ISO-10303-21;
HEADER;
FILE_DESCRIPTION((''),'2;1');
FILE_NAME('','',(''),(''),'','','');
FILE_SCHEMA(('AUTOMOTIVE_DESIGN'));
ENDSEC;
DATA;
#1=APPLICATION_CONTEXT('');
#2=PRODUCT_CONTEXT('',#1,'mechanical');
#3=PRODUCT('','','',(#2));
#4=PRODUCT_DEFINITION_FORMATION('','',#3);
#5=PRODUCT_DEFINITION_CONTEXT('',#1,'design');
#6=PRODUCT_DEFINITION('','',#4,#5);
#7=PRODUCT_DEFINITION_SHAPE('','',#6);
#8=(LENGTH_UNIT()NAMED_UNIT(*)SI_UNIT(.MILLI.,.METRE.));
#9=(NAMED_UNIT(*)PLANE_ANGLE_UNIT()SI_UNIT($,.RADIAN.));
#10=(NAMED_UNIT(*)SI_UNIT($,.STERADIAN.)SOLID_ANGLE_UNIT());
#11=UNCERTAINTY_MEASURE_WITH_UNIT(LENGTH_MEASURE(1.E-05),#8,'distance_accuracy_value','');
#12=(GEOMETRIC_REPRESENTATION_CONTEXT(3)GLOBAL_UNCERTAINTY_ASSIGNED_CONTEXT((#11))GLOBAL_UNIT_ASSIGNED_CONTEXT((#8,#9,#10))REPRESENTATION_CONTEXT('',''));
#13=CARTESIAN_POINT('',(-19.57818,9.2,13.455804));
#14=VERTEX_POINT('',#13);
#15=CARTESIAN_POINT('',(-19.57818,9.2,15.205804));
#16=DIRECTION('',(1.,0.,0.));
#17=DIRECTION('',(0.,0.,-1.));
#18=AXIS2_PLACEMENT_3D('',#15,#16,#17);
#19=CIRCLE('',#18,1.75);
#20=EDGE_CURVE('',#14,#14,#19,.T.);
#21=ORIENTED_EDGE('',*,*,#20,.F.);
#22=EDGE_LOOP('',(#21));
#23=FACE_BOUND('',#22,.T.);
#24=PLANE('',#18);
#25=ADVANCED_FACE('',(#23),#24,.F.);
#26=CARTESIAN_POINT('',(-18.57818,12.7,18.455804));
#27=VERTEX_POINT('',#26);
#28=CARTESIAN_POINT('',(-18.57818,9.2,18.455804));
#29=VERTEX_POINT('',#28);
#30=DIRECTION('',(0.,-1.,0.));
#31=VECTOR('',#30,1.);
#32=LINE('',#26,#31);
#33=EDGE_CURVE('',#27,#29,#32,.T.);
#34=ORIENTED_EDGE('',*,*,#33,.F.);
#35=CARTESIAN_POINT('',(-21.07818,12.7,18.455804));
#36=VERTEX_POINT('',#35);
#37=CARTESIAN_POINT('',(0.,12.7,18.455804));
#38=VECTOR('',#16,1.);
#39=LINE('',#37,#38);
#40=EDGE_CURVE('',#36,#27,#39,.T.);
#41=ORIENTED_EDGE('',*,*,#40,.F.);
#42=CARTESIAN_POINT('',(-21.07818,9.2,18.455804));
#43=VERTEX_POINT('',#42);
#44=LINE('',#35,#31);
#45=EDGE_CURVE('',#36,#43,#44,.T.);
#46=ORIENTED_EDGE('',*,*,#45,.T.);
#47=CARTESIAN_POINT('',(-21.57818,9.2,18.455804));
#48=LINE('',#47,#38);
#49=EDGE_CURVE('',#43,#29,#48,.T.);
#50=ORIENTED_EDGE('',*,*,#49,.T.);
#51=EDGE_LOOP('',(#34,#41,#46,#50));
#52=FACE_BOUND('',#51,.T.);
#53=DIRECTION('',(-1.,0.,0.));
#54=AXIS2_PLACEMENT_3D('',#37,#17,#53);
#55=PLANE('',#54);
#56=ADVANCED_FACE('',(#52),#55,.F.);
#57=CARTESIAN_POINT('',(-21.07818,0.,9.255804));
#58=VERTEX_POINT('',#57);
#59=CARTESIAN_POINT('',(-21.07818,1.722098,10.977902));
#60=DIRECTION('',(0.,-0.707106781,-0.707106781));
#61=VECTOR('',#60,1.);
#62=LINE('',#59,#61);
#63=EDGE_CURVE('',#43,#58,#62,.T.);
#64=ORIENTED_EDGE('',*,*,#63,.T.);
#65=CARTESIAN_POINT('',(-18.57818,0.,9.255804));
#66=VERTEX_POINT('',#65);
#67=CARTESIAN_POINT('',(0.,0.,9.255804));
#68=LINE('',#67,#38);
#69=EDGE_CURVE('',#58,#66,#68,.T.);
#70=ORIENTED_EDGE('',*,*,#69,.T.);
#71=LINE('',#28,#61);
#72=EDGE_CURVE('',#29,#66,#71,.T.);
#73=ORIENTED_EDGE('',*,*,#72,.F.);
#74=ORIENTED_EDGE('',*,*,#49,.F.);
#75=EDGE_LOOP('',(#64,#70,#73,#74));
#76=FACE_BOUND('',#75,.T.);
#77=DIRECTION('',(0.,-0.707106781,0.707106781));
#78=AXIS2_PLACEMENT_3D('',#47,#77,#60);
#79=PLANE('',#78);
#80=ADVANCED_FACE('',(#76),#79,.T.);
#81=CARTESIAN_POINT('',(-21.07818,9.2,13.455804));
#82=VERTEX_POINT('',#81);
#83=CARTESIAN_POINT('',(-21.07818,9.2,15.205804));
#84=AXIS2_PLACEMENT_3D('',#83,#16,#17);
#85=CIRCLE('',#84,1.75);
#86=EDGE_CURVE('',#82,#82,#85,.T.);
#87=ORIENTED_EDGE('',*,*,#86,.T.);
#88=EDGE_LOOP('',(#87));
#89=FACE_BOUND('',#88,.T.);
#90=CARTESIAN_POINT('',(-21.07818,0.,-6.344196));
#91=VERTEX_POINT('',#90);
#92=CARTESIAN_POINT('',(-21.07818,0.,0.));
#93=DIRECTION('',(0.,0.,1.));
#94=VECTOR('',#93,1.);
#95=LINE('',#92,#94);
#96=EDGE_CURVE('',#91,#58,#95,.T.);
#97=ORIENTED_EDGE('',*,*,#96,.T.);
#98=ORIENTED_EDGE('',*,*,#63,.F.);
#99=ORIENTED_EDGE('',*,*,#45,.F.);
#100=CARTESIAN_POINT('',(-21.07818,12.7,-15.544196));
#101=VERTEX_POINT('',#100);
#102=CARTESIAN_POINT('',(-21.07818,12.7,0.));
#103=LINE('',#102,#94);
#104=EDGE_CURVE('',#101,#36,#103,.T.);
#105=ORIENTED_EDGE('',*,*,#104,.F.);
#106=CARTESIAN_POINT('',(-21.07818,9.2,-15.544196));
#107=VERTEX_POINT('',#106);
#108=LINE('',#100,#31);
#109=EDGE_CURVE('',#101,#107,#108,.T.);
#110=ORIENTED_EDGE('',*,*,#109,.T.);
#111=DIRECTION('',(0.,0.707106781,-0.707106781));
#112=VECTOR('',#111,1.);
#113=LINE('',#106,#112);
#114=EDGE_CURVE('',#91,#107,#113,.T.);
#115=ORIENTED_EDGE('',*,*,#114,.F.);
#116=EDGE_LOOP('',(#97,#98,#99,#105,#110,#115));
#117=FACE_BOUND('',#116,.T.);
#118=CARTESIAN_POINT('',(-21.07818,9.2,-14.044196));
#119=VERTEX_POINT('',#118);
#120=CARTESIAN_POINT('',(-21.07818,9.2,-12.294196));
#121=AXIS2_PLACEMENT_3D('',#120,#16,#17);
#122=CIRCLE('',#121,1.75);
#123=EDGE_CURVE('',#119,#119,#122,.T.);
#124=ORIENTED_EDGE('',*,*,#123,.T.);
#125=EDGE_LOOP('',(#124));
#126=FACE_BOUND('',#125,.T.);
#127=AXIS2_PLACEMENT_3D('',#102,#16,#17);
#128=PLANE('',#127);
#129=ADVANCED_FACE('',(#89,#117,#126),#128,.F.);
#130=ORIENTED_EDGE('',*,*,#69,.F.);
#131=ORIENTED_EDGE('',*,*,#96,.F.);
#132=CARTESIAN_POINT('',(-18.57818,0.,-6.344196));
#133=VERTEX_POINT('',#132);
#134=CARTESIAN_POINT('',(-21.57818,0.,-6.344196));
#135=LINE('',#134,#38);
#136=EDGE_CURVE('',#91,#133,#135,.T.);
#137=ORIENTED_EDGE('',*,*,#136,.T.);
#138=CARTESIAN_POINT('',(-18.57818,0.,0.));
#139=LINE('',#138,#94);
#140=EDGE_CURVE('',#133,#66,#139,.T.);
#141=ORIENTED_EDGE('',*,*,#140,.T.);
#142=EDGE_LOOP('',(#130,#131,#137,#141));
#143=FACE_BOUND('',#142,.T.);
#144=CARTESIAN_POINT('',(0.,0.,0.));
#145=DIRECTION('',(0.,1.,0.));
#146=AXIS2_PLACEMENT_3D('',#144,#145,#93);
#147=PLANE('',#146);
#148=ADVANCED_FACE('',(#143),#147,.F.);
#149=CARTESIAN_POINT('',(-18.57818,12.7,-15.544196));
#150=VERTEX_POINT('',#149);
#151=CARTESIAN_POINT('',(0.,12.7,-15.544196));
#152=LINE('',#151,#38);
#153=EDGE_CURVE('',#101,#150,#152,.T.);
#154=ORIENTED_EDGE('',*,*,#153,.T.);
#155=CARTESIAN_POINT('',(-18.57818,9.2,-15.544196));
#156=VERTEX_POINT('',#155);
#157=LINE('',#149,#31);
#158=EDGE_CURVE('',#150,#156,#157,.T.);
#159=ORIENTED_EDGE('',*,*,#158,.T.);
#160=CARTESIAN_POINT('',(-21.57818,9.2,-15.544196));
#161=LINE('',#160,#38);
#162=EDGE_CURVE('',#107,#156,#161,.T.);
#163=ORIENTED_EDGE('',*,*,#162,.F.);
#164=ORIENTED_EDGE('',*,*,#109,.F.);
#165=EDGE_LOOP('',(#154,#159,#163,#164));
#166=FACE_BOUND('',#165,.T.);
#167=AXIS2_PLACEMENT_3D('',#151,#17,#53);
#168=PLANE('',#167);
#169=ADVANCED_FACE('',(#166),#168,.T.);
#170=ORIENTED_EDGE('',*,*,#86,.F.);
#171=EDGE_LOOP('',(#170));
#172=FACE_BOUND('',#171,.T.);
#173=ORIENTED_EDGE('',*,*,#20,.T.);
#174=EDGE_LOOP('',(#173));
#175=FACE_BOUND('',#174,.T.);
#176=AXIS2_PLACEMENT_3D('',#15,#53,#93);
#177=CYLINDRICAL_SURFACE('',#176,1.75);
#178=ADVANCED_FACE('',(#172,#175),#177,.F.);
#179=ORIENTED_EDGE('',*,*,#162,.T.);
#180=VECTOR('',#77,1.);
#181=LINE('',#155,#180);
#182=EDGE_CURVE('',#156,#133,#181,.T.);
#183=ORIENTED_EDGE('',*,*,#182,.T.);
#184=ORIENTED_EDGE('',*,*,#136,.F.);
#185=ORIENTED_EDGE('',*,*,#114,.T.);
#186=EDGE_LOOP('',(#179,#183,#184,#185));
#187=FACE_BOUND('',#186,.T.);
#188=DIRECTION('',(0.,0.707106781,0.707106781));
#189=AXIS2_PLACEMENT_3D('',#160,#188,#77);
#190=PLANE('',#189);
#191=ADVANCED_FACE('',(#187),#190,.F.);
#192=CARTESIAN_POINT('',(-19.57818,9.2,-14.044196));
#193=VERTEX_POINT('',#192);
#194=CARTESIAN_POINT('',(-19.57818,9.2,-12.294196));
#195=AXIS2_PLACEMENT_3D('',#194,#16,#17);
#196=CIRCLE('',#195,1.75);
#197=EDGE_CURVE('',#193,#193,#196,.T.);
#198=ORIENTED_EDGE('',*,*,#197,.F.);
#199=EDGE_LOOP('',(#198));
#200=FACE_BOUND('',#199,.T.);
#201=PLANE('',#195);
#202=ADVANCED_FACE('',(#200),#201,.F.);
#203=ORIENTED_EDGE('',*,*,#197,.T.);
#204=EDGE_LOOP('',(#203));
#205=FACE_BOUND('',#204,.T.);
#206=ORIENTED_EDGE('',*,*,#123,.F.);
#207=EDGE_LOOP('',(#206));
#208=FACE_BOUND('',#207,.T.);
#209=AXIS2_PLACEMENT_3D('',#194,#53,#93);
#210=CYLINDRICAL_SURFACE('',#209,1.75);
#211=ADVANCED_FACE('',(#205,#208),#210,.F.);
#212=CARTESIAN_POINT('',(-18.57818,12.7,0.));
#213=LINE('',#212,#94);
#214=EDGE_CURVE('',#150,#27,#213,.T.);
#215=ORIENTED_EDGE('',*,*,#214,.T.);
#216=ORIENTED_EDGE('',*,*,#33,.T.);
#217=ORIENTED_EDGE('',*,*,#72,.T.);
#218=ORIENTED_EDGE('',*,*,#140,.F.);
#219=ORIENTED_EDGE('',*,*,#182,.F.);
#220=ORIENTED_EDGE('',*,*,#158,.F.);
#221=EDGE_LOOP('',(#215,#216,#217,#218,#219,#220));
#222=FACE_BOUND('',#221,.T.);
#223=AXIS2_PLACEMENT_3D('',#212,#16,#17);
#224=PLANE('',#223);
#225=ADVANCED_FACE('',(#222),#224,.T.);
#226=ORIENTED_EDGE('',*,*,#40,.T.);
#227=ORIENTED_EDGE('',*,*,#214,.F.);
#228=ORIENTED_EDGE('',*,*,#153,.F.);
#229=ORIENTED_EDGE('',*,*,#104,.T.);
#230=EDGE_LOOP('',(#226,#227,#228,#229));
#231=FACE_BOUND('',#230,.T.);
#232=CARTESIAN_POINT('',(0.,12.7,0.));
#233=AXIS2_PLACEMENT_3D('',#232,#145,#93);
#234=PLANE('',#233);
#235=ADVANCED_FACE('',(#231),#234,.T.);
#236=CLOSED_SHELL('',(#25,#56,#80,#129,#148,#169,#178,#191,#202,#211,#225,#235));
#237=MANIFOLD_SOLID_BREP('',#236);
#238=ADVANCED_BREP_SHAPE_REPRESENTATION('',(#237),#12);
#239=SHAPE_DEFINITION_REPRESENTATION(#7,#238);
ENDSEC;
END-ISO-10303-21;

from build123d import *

# Parameters (mm, degrees)
STOCK_TEST_FINGER_MICHELLE_V2_1_START = -21.07817965
STOCK_TEST_FINGER_MICHELLE_V2_1_DEPTH = 2.5
CUT_EXTRUDE1_START                    = -1.5
SKETCH1_R                             = 1.75
CUT_EXTRUDE1_DEPTH                    = 1.5


# Read off the part's stored shape, not the designer's step: Stock-test_finger_michelle_V2-1
with BuildPart() as part:
    # Stock-test_finger_michelle_V2-1 outline → Stock-test_finger_michelle_V2-1 (new body)
    with BuildSketch(Plane.YZ.offset(STOCK_TEST_FINGER_MICHELLE_V2_1_START)):
        Polygon((0, -6.34419618), (9.2, -15.54419618), (12.7, -15.54419618), (12.7, 18.45580382), (9.2, 18.45580382), (0, 9.25580382), align=None)
    extrude(amount=STOCK_TEST_FINGER_MICHELLE_V2_1_DEPTH)

    # Sketch1 → Cut-Extrude1 (cut)
    with BuildSketch(Plane.ZY.offset(21.07817965).offset(CUT_EXTRUDE1_START)):
        with Locations(Location((-12.29419618, 9.2, 0), (0, 0, 180))):
            Circle(SKETCH1_R)
        with Locations(Location((15.20580382, 9.2, 0), (0, 0, 180))):
            Circle(SKETCH1_R)
    extrude(amount=CUT_EXTRUDE1_DEPTH, mode=Mode.SUBTRACT)


solid = part.part
